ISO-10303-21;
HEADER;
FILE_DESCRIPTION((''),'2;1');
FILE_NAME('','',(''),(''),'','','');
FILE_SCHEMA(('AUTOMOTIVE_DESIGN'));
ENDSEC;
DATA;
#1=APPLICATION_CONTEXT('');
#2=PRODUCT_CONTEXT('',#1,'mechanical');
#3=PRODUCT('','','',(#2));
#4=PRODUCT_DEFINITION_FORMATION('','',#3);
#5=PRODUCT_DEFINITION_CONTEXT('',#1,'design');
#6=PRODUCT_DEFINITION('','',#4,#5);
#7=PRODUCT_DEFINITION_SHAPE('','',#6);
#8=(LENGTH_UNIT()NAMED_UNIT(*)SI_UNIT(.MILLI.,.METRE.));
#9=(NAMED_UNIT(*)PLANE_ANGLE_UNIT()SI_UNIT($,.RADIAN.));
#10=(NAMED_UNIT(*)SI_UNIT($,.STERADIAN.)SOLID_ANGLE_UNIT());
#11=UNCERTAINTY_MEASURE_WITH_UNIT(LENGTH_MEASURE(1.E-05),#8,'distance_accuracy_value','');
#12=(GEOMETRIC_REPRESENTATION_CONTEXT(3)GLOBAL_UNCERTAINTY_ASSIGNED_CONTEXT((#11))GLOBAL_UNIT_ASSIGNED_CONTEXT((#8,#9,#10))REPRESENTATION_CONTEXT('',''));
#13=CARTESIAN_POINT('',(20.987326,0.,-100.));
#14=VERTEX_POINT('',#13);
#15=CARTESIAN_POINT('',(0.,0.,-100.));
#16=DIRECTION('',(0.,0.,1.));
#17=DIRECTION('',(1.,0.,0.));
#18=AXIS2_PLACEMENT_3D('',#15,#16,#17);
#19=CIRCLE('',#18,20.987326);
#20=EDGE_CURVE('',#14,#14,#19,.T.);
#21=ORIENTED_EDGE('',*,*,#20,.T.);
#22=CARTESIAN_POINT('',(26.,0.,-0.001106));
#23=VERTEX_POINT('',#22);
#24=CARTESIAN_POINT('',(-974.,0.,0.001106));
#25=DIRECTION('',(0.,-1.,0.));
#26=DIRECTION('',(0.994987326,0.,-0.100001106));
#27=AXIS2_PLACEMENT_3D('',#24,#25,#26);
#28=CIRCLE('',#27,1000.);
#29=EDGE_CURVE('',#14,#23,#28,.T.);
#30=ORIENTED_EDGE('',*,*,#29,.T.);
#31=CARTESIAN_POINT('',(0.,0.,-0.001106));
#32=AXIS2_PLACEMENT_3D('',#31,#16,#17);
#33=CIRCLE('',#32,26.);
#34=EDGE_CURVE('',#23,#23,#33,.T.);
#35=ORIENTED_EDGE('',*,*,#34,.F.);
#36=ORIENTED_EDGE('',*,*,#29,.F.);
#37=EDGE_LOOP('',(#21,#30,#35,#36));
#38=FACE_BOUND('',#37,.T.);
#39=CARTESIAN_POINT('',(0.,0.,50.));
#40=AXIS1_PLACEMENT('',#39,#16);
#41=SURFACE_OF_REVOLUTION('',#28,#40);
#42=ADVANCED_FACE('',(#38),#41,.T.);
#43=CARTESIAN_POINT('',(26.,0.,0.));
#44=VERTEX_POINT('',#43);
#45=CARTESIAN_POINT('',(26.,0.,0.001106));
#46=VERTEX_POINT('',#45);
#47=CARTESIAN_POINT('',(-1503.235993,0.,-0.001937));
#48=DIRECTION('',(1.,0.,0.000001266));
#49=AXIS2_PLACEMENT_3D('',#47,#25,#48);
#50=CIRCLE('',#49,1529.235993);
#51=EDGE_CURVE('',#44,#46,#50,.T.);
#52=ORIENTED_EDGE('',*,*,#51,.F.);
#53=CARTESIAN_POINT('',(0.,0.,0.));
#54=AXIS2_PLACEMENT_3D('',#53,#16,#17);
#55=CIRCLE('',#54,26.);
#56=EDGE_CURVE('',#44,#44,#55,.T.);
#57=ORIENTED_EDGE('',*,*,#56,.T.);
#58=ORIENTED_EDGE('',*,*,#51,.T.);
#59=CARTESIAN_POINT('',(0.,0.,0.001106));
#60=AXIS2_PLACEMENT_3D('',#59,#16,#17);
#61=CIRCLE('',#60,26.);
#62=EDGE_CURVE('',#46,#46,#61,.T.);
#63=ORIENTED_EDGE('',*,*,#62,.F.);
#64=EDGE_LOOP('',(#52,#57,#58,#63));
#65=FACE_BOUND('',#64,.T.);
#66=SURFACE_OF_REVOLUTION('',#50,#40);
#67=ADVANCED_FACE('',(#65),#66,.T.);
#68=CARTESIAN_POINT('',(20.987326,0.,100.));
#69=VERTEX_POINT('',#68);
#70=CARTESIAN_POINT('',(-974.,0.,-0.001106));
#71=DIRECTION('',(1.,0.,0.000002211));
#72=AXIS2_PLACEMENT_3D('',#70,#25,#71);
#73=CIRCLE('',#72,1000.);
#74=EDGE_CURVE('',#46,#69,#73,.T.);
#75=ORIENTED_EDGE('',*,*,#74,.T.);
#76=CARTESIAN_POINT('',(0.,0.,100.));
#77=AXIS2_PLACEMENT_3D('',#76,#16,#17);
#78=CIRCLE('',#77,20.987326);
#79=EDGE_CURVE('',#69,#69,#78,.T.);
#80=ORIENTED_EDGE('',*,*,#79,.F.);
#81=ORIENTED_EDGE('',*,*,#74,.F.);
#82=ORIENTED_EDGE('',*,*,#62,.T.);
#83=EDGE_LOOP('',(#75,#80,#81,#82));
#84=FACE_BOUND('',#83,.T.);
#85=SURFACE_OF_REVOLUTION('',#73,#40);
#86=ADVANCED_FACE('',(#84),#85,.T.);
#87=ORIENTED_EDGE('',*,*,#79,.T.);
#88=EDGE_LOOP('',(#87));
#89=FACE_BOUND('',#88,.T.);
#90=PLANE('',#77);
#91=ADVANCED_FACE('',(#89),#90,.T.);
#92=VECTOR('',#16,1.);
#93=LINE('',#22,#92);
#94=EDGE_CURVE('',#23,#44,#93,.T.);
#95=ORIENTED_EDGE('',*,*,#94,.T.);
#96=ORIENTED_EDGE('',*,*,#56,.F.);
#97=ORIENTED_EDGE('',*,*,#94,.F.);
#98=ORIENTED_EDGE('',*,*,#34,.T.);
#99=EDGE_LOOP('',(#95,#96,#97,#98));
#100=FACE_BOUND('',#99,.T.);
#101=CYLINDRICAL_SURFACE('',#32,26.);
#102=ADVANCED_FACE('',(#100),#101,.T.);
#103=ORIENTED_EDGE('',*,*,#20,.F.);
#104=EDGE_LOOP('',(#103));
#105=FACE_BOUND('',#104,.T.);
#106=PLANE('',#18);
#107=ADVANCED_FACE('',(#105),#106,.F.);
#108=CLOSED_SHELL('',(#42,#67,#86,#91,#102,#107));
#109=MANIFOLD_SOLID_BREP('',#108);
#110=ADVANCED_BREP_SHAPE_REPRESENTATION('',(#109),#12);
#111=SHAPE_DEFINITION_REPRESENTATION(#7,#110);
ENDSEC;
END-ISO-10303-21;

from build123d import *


# Not quite as in the source:
# - a feature names something its author has since deleted; it is built from what else it names


with BuildPart() as f1:
    # F0 (on Front) → F1 (revolve)
    with BuildSketch(Plane.XZ):
        with BuildLine():
            Line((0, 100), (0, 0))
            Line((0, 0), (0, -100))
            Line((0, -100), (20.9873259794, -100))
            ThreePointArc((20.9873259794, -100), (24.7459899382, -50.0633286095), (25.9999999976, -0.0011056954))
            Line((26, -0.0011056954), (26, 0))
            ThreePointArc((25.9999999994, 0), (25.9999999986, 0.0005528477), (25.9999999976, 0.0011056954))
            ThreePointArc((25.9999999976, 0.0011056954), (24.7459899382, 50.0633286095), (20.9873259794, 100))
            Line((20.9873259794, 100), (0, 100))
        make_face()
    revolve(axis=Axis((0, 0, 50), (0, 0, 1)))


solid = f1.part
